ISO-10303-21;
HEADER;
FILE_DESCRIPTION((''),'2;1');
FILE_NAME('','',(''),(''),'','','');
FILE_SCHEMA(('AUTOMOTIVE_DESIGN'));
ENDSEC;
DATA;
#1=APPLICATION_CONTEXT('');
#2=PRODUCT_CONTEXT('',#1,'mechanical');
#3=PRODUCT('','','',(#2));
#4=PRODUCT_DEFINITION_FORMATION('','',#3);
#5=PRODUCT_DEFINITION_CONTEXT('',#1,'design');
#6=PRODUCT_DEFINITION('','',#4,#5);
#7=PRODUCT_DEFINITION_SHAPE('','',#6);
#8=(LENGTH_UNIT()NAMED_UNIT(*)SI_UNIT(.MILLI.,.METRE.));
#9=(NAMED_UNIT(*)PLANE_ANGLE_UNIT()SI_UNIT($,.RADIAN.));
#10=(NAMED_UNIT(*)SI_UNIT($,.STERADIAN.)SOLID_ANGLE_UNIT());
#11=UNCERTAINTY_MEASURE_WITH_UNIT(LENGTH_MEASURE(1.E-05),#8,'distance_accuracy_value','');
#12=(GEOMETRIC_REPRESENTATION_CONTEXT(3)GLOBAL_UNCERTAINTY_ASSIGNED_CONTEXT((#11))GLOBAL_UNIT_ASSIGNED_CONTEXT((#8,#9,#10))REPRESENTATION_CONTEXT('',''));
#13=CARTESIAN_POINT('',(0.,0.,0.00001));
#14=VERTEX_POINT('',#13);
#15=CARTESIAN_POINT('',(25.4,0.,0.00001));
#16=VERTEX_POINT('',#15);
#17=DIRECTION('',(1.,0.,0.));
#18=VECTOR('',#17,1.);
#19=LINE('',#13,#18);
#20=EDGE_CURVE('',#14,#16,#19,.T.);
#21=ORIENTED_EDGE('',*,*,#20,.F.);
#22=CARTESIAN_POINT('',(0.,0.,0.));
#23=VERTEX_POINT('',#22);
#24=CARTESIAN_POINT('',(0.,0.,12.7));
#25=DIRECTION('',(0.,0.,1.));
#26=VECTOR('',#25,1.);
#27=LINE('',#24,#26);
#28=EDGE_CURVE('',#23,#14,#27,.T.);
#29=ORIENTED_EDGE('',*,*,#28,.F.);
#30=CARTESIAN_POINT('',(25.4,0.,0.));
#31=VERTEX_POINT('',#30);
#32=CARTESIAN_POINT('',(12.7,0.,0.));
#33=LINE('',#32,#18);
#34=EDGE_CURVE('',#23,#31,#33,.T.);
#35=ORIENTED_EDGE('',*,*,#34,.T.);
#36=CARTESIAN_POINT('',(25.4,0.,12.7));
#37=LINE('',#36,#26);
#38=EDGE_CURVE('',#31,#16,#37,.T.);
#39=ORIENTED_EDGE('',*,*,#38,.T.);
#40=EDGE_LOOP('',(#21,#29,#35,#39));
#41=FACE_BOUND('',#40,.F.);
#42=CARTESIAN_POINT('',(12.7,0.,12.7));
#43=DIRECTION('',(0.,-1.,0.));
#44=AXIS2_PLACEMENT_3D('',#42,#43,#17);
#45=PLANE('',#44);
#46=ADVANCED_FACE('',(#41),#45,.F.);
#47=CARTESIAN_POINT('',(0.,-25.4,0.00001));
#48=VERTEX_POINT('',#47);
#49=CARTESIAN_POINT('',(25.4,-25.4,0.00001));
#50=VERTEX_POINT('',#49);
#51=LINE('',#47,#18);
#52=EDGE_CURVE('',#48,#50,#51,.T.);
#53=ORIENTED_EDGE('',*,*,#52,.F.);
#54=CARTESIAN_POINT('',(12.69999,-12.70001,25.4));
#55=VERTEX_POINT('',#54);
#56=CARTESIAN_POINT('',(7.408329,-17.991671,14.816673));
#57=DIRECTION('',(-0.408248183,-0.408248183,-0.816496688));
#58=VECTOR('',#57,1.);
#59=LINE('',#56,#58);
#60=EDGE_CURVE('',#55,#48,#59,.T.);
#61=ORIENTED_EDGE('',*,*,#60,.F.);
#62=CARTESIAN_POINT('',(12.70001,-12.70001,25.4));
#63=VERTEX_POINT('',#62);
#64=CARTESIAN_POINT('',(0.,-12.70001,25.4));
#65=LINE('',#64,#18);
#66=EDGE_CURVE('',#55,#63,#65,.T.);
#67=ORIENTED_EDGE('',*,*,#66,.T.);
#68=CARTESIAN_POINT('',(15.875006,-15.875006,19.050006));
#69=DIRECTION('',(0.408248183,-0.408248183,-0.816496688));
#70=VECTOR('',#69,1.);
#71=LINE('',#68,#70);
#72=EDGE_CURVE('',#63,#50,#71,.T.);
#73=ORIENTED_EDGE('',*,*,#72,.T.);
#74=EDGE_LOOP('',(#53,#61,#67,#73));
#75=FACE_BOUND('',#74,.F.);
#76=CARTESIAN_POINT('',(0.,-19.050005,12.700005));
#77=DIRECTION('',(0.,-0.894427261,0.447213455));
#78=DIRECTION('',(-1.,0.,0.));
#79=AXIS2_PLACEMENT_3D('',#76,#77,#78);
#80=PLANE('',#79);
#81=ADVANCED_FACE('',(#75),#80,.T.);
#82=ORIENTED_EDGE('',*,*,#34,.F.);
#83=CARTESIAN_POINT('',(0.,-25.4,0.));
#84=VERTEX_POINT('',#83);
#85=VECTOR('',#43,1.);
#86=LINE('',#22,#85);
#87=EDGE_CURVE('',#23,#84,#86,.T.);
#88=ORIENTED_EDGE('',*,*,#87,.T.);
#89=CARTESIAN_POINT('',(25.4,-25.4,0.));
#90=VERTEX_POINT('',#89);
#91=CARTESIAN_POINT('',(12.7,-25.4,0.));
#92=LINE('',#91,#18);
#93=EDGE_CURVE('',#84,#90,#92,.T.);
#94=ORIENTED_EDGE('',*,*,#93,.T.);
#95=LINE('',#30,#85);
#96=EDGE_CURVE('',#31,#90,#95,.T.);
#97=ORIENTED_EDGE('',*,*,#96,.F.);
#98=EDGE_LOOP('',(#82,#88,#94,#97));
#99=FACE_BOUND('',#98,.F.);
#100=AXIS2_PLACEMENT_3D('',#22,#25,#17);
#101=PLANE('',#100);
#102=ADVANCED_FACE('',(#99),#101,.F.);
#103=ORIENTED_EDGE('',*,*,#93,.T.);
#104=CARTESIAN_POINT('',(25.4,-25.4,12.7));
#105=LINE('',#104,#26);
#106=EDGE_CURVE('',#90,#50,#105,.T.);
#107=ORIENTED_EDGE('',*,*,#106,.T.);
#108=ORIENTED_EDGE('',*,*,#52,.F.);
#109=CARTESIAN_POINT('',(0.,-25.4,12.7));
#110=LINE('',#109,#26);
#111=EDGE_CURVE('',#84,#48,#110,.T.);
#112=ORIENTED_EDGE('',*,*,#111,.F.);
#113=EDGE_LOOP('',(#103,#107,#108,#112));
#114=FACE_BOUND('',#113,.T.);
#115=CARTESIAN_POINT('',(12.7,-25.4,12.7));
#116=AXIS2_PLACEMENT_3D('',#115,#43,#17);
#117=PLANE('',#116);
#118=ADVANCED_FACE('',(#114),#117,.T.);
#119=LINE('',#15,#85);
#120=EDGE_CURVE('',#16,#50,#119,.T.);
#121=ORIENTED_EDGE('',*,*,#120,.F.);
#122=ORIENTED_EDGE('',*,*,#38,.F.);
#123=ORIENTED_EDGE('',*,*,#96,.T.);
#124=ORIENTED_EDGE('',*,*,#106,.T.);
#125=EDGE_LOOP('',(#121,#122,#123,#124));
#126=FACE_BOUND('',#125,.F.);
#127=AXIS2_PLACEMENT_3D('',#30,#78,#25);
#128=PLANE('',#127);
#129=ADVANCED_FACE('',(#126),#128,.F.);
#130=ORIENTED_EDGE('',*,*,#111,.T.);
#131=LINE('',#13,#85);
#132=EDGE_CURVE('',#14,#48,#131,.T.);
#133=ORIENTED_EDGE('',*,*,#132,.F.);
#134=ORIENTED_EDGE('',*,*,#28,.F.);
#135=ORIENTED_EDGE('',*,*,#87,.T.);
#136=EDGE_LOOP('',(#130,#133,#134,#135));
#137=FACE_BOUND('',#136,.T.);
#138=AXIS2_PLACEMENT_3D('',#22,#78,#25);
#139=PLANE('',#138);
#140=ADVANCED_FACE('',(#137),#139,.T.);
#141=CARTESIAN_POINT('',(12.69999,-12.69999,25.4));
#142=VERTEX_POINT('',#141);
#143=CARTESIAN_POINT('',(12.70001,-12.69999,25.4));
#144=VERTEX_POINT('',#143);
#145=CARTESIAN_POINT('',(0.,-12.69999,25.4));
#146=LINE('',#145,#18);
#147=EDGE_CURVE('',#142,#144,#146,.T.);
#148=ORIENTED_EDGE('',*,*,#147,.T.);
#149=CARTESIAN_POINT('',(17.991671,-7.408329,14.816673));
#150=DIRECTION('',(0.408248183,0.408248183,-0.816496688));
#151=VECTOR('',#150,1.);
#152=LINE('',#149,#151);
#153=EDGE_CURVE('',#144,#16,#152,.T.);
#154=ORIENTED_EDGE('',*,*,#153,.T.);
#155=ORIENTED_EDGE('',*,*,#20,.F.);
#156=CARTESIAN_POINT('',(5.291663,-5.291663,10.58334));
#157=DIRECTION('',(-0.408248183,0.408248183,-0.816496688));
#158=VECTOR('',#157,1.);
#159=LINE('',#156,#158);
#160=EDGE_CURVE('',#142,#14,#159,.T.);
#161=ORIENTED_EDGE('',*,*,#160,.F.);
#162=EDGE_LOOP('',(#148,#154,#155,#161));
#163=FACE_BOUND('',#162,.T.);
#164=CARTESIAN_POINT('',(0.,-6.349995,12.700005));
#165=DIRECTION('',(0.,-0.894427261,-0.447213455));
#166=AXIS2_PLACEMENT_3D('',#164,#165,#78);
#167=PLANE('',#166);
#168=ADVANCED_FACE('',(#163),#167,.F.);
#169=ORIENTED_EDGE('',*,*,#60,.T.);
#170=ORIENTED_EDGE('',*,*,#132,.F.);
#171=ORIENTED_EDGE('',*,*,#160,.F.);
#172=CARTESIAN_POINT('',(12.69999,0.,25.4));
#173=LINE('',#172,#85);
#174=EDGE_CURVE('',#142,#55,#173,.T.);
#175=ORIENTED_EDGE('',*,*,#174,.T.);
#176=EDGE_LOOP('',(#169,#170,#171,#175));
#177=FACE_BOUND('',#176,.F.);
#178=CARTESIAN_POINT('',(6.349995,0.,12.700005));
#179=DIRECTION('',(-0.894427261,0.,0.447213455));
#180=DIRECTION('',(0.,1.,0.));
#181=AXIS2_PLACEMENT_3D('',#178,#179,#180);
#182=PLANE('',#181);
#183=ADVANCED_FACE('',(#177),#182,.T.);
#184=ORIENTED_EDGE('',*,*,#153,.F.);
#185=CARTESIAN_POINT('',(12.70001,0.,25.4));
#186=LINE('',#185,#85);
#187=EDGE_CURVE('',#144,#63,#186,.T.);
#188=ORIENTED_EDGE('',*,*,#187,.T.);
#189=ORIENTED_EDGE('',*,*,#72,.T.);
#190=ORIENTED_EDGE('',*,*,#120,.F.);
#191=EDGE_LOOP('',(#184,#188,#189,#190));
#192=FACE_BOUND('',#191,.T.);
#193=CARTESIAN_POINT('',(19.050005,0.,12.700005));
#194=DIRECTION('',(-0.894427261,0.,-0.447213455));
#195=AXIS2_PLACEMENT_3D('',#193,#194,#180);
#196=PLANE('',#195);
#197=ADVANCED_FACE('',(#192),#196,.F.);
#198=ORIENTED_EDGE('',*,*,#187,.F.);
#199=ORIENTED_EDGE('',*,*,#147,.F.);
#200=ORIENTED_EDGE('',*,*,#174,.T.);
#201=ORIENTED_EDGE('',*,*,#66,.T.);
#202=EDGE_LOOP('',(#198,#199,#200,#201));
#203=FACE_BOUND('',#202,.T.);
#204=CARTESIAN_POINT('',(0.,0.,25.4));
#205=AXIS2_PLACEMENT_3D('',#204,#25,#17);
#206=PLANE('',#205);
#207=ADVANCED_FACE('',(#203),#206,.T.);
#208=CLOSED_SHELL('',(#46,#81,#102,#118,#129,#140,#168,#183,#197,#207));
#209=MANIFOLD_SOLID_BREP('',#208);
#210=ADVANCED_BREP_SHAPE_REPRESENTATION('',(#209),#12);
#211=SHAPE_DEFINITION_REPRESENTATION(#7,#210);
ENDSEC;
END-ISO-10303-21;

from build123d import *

# Parameters (mm, degrees)
F0_W     = 25.4
F0_H     = 25.4
F1_DEPTH = 25.4
F2_SIZE2 = 25.39999
F2_SIZE  = 12.69999


# Not quite as in the source:
# - a fillet or chamfer is up to 0.001 mm smaller than in the source, because OpenCascade refuses the exact size


with BuildPart() as f1:
    # F0 (on Front) → F1 (new body)
    with BuildSketch(Plane.XZ):
        with Locations((12.7, 12.7)):
            Rectangle(F0_W, F0_H)
    extrude(amount=F1_DEPTH)

    # F2 (size 12.7 and 25.4 in the source; OpenCascade refuses exactly that, so slightly less here)
    f2_edges = [f1.edges().sort_by_distance(p)[0] for p in [
        (25.4, -12.7, 25.4),
        (0, -12.7, 25.4),
        (12.7, 0, 25.4),
        (12.7, -25.4, 25.4),
    ]]
    f2_side = f1.faces().sort_by_distance((12.7, -12.7, 25.4))[0]
    chamfer(f2_edges, length=F2_SIZE, length2=F2_SIZE2, reference=f2_side)


solid = f1.part
